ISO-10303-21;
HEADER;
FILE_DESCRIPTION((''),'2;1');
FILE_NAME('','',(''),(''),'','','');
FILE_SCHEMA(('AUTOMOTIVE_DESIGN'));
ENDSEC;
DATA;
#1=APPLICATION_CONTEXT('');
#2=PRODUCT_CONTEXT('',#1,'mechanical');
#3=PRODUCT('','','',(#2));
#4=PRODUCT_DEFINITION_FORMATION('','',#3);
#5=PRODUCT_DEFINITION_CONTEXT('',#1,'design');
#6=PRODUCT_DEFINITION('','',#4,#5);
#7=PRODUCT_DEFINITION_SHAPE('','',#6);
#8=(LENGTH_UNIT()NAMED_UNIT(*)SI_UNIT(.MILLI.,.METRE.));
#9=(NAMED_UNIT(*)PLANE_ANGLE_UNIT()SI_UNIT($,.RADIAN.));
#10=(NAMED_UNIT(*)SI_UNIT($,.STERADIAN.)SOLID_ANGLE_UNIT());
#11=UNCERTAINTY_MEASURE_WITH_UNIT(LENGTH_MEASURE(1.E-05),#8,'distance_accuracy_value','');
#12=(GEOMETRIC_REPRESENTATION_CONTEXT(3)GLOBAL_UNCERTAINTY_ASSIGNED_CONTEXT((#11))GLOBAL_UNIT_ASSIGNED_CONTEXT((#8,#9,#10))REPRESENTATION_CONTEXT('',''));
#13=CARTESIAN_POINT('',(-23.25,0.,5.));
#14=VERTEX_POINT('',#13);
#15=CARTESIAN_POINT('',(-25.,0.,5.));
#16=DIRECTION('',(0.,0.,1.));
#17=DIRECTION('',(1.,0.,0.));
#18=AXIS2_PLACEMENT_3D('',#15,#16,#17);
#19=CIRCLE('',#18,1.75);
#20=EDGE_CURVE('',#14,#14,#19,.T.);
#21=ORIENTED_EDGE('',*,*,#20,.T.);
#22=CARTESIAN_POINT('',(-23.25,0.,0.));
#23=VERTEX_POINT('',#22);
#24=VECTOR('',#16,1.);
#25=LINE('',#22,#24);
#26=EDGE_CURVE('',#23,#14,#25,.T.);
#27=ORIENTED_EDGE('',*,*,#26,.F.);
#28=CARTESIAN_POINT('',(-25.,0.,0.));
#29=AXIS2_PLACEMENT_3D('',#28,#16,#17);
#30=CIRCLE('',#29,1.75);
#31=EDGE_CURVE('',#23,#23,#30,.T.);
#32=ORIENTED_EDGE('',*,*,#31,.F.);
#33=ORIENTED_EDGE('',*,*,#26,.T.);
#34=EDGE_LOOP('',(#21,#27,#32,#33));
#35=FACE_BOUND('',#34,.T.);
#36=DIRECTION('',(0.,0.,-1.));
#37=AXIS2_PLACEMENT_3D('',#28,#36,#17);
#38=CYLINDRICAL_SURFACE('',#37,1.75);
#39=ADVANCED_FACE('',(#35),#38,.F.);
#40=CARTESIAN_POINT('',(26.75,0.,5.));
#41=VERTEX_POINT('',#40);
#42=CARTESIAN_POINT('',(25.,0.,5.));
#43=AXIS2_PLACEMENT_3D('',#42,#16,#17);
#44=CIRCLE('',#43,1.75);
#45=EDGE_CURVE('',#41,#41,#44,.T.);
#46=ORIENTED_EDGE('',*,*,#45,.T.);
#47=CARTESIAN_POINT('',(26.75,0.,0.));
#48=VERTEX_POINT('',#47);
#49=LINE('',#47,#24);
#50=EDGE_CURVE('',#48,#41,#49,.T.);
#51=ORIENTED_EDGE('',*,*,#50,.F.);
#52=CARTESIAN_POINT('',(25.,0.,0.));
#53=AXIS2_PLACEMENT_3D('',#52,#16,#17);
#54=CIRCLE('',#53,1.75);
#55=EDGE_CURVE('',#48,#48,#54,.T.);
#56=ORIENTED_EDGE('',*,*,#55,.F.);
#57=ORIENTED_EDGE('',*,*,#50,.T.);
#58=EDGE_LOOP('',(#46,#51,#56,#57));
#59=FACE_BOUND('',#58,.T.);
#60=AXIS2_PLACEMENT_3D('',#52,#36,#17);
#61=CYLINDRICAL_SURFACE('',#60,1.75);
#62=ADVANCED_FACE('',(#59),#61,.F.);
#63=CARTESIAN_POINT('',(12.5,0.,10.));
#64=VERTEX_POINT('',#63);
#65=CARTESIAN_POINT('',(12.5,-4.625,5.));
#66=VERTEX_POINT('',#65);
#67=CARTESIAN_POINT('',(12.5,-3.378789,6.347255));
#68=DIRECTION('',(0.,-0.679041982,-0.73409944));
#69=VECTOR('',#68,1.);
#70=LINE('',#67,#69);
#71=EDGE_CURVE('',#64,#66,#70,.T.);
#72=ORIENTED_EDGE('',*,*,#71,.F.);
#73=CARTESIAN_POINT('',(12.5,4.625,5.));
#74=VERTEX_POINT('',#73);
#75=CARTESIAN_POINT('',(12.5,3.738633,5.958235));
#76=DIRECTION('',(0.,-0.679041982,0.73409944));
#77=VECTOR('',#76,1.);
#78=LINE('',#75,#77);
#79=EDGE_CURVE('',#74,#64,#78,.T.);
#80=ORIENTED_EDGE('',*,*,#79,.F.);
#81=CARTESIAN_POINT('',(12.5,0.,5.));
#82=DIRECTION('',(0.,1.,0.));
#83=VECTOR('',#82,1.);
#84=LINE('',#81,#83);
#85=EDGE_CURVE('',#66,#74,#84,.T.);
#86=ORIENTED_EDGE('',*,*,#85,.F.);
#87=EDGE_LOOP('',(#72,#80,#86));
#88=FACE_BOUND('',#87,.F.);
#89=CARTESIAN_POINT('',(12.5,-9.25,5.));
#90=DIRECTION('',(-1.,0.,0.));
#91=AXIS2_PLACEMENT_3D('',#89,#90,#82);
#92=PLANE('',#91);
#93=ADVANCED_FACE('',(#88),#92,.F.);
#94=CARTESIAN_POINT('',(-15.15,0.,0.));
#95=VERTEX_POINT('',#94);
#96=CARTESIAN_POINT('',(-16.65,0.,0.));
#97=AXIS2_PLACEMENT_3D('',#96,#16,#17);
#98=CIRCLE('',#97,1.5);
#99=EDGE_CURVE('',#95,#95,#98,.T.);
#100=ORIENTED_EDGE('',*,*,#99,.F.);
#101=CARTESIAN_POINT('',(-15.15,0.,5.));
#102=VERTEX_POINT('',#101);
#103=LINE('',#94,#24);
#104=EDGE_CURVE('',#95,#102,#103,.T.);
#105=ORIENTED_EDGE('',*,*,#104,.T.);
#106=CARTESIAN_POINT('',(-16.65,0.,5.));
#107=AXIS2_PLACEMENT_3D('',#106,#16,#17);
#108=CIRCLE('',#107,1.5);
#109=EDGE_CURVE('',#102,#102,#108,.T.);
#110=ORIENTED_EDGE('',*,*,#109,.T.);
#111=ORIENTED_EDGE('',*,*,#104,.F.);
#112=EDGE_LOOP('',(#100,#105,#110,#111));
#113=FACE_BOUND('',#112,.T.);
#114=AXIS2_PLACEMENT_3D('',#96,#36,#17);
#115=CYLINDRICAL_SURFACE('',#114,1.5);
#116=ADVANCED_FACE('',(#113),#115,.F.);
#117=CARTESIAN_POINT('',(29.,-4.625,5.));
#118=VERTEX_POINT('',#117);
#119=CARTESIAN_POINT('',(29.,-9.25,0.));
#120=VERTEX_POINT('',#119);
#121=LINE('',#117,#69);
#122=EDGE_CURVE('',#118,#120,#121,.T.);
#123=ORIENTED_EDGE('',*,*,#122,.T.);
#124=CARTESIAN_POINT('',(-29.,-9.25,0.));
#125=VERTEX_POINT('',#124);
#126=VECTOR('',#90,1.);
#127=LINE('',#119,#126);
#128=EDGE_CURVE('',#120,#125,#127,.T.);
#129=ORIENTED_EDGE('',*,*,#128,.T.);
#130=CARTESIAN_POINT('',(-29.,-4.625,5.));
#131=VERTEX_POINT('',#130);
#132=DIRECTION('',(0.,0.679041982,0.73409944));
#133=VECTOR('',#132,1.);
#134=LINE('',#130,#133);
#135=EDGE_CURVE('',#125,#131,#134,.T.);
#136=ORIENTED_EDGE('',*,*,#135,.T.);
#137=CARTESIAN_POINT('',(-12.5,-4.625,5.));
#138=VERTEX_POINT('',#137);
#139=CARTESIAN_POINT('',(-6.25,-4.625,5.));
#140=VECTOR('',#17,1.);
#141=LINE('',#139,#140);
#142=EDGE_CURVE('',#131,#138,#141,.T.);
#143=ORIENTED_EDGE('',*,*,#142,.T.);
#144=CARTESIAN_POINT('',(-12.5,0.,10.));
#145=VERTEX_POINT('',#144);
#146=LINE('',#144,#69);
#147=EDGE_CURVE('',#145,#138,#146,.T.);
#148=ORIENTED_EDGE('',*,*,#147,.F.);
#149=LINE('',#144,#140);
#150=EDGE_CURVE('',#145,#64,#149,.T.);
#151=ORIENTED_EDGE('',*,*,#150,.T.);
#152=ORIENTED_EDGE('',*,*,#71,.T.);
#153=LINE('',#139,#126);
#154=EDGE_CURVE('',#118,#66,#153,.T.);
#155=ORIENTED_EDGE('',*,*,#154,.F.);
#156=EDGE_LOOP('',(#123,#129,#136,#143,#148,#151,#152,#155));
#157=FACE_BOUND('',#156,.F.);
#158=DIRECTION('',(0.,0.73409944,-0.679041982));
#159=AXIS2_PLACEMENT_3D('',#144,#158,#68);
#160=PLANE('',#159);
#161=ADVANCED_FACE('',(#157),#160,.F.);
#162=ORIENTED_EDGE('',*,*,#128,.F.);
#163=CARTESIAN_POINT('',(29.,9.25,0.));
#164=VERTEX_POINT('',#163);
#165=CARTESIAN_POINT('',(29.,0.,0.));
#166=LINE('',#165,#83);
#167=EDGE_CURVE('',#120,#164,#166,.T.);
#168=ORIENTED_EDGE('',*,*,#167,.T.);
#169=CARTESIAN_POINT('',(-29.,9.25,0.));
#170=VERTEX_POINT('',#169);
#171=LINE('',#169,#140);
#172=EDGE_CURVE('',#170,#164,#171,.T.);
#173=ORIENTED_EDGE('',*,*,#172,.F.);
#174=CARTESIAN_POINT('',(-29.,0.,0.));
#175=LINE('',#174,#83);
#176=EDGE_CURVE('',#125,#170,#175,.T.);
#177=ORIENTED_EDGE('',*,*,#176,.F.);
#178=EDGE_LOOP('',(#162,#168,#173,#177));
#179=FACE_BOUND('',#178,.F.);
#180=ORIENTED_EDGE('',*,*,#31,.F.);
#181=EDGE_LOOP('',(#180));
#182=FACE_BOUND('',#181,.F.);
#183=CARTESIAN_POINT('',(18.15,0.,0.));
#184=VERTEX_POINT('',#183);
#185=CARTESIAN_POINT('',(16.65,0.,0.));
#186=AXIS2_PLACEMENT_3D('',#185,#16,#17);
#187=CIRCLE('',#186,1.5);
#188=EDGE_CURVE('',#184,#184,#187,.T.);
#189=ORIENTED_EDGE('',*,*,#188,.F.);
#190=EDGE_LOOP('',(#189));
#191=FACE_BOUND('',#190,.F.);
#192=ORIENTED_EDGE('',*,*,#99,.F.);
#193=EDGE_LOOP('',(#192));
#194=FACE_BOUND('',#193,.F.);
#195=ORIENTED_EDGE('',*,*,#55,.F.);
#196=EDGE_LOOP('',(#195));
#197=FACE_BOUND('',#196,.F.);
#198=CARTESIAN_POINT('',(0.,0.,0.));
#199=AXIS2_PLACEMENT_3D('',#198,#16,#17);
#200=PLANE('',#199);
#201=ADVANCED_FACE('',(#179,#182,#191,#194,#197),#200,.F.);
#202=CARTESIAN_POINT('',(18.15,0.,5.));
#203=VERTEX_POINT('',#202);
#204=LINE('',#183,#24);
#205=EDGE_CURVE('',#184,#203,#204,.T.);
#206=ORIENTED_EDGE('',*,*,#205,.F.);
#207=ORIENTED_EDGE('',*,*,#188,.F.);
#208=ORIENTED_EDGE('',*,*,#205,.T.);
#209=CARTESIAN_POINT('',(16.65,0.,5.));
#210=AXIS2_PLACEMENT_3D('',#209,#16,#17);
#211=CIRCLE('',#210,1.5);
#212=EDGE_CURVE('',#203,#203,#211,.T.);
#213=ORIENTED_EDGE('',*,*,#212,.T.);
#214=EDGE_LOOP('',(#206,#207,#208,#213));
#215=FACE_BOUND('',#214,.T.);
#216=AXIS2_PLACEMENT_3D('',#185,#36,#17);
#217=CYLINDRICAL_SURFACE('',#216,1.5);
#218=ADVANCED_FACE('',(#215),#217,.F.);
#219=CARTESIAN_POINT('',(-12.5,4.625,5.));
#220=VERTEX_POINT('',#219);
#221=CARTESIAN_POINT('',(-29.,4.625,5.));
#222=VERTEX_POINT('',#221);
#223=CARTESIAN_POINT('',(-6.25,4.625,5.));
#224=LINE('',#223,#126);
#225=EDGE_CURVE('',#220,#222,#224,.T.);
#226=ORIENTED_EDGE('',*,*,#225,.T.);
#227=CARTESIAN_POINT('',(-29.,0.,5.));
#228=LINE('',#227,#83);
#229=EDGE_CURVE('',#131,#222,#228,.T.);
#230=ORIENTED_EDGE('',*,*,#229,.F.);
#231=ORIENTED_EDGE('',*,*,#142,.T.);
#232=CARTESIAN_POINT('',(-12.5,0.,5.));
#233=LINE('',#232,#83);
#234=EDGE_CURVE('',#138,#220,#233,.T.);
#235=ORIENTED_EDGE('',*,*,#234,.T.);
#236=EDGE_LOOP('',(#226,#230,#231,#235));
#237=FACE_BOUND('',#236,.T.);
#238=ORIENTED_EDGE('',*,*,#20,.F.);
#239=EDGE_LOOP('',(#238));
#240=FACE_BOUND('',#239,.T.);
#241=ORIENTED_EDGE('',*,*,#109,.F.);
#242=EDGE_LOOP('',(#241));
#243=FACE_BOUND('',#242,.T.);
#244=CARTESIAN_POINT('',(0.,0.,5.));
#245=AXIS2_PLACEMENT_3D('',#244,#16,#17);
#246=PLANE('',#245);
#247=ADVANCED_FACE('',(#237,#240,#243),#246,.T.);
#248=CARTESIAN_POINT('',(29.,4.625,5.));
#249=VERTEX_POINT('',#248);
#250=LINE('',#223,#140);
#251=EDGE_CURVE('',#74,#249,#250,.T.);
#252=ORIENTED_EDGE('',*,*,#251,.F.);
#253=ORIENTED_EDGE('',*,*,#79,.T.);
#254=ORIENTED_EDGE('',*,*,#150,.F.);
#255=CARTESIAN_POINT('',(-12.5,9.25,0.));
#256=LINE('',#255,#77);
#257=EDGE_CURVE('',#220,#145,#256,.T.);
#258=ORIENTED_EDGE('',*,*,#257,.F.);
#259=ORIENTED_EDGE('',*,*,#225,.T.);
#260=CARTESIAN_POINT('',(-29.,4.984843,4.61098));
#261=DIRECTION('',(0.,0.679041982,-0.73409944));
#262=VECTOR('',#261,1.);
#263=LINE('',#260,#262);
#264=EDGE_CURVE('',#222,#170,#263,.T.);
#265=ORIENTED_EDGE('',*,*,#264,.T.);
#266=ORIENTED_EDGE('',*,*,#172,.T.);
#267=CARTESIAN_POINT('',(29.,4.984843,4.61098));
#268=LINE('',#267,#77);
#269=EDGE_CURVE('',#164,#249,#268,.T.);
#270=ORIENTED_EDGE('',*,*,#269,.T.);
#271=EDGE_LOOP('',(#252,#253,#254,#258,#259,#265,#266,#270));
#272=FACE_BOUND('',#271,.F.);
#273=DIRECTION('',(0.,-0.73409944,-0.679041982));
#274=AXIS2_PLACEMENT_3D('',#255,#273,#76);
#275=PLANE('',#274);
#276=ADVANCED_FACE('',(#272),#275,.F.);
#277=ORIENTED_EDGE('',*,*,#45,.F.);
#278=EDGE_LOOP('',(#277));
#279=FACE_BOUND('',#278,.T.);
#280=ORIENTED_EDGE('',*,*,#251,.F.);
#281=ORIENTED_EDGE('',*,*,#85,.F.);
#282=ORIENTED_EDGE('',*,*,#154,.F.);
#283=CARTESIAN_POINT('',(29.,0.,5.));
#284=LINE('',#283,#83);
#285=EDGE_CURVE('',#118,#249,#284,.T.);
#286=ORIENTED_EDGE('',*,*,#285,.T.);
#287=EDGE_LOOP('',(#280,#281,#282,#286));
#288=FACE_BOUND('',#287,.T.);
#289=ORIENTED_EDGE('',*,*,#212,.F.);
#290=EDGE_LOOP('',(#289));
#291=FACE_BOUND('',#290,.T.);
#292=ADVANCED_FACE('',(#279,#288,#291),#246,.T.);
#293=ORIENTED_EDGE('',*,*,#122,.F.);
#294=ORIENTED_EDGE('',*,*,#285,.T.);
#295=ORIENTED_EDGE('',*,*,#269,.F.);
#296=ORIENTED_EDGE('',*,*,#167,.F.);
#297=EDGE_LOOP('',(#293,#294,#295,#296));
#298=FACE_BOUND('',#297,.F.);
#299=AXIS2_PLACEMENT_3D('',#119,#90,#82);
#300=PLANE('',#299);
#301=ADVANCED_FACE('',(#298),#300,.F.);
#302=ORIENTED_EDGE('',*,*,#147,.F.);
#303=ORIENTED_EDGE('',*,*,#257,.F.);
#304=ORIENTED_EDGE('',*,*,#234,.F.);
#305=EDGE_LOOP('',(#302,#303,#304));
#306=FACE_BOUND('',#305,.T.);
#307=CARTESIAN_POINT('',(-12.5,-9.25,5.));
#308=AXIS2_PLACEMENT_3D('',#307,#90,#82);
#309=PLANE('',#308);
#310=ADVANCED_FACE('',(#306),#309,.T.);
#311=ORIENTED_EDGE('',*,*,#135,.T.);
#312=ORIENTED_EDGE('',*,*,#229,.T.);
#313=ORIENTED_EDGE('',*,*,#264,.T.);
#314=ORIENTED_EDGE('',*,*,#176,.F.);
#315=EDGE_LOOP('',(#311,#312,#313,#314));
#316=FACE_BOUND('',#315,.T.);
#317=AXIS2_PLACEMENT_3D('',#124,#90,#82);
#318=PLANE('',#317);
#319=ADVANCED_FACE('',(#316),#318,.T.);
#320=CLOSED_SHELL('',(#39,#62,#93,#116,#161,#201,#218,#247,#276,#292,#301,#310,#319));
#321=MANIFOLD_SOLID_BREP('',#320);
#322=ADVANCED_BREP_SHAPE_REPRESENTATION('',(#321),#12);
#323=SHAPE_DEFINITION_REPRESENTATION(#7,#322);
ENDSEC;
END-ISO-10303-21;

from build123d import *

# Parameters (mm, degrees)
F0_W          = 38
F0_H          = 18.5
F0_R          = 1.5
F0_W_2        = 10
F0_R_2        = 1.75
F1_DEPTH      = 5
F2_W          = 25
F2_H          = 18.5
F3_DEPTH      = 5
F5_DEPTH      = 41.501
F5_DEPTH_BACK = 16.501


with BuildPart() as f1:
    # F0 (on Top) → F1 (new body)
    with BuildSketch(Plane.XY):
        Rectangle(F0_W, F0_H)
        with Locations((-16.65, 0)):
            Circle(F0_R, mode=Mode.SUBTRACT)
        with Locations((16.65, 0)):
            Circle(F0_R, mode=Mode.SUBTRACT)
        with Locations((24, 0)):
            Rectangle(F0_W_2, F0_H)
        with Locations((25, 0)):
            Circle(F0_R_2, mode=Mode.SUBTRACT)
        with Locations((-24, 0)):
            Rectangle(F0_W_2, F0_H)
        with Locations((-25, 0)):
            Circle(F0_R_2, mode=Mode.SUBTRACT)
    extrude(amount=F1_DEPTH)

    # F2 (on face) → F3 (join)
    with BuildSketch(Plane.XY.offset(5)):
        Rectangle(F2_W, F2_H)
    extrude(amount=F3_DEPTH)

    # F4 (on face) → F5 (cut, two sides)
    with BuildSketch(Plane(origin=(-12.5, 0, 0), x_dir=(0, -1, 0), z_dir=(-1, 0, 0))) as f5_sk:
        Polygon((-4.625, 5), (0, 10), (-9.25, 10), (-9.25, 5), align=None)
        Polygon((9.25, 10), (0, 10), (4.625, 5), (9.25, 5), align=None)
        Polygon((9.25, 5), (4.625, 5), (9.25, 0), align=None)
        Polygon((-9.25, 0), (-4.625, 5), (-9.25, 5), align=None)
    extrude(amount=-F5_DEPTH, mode=Mode.SUBTRACT)
    extrude(f5_sk.sketch, amount=F5_DEPTH_BACK, mode=Mode.SUBTRACT)


solid = f1.part
